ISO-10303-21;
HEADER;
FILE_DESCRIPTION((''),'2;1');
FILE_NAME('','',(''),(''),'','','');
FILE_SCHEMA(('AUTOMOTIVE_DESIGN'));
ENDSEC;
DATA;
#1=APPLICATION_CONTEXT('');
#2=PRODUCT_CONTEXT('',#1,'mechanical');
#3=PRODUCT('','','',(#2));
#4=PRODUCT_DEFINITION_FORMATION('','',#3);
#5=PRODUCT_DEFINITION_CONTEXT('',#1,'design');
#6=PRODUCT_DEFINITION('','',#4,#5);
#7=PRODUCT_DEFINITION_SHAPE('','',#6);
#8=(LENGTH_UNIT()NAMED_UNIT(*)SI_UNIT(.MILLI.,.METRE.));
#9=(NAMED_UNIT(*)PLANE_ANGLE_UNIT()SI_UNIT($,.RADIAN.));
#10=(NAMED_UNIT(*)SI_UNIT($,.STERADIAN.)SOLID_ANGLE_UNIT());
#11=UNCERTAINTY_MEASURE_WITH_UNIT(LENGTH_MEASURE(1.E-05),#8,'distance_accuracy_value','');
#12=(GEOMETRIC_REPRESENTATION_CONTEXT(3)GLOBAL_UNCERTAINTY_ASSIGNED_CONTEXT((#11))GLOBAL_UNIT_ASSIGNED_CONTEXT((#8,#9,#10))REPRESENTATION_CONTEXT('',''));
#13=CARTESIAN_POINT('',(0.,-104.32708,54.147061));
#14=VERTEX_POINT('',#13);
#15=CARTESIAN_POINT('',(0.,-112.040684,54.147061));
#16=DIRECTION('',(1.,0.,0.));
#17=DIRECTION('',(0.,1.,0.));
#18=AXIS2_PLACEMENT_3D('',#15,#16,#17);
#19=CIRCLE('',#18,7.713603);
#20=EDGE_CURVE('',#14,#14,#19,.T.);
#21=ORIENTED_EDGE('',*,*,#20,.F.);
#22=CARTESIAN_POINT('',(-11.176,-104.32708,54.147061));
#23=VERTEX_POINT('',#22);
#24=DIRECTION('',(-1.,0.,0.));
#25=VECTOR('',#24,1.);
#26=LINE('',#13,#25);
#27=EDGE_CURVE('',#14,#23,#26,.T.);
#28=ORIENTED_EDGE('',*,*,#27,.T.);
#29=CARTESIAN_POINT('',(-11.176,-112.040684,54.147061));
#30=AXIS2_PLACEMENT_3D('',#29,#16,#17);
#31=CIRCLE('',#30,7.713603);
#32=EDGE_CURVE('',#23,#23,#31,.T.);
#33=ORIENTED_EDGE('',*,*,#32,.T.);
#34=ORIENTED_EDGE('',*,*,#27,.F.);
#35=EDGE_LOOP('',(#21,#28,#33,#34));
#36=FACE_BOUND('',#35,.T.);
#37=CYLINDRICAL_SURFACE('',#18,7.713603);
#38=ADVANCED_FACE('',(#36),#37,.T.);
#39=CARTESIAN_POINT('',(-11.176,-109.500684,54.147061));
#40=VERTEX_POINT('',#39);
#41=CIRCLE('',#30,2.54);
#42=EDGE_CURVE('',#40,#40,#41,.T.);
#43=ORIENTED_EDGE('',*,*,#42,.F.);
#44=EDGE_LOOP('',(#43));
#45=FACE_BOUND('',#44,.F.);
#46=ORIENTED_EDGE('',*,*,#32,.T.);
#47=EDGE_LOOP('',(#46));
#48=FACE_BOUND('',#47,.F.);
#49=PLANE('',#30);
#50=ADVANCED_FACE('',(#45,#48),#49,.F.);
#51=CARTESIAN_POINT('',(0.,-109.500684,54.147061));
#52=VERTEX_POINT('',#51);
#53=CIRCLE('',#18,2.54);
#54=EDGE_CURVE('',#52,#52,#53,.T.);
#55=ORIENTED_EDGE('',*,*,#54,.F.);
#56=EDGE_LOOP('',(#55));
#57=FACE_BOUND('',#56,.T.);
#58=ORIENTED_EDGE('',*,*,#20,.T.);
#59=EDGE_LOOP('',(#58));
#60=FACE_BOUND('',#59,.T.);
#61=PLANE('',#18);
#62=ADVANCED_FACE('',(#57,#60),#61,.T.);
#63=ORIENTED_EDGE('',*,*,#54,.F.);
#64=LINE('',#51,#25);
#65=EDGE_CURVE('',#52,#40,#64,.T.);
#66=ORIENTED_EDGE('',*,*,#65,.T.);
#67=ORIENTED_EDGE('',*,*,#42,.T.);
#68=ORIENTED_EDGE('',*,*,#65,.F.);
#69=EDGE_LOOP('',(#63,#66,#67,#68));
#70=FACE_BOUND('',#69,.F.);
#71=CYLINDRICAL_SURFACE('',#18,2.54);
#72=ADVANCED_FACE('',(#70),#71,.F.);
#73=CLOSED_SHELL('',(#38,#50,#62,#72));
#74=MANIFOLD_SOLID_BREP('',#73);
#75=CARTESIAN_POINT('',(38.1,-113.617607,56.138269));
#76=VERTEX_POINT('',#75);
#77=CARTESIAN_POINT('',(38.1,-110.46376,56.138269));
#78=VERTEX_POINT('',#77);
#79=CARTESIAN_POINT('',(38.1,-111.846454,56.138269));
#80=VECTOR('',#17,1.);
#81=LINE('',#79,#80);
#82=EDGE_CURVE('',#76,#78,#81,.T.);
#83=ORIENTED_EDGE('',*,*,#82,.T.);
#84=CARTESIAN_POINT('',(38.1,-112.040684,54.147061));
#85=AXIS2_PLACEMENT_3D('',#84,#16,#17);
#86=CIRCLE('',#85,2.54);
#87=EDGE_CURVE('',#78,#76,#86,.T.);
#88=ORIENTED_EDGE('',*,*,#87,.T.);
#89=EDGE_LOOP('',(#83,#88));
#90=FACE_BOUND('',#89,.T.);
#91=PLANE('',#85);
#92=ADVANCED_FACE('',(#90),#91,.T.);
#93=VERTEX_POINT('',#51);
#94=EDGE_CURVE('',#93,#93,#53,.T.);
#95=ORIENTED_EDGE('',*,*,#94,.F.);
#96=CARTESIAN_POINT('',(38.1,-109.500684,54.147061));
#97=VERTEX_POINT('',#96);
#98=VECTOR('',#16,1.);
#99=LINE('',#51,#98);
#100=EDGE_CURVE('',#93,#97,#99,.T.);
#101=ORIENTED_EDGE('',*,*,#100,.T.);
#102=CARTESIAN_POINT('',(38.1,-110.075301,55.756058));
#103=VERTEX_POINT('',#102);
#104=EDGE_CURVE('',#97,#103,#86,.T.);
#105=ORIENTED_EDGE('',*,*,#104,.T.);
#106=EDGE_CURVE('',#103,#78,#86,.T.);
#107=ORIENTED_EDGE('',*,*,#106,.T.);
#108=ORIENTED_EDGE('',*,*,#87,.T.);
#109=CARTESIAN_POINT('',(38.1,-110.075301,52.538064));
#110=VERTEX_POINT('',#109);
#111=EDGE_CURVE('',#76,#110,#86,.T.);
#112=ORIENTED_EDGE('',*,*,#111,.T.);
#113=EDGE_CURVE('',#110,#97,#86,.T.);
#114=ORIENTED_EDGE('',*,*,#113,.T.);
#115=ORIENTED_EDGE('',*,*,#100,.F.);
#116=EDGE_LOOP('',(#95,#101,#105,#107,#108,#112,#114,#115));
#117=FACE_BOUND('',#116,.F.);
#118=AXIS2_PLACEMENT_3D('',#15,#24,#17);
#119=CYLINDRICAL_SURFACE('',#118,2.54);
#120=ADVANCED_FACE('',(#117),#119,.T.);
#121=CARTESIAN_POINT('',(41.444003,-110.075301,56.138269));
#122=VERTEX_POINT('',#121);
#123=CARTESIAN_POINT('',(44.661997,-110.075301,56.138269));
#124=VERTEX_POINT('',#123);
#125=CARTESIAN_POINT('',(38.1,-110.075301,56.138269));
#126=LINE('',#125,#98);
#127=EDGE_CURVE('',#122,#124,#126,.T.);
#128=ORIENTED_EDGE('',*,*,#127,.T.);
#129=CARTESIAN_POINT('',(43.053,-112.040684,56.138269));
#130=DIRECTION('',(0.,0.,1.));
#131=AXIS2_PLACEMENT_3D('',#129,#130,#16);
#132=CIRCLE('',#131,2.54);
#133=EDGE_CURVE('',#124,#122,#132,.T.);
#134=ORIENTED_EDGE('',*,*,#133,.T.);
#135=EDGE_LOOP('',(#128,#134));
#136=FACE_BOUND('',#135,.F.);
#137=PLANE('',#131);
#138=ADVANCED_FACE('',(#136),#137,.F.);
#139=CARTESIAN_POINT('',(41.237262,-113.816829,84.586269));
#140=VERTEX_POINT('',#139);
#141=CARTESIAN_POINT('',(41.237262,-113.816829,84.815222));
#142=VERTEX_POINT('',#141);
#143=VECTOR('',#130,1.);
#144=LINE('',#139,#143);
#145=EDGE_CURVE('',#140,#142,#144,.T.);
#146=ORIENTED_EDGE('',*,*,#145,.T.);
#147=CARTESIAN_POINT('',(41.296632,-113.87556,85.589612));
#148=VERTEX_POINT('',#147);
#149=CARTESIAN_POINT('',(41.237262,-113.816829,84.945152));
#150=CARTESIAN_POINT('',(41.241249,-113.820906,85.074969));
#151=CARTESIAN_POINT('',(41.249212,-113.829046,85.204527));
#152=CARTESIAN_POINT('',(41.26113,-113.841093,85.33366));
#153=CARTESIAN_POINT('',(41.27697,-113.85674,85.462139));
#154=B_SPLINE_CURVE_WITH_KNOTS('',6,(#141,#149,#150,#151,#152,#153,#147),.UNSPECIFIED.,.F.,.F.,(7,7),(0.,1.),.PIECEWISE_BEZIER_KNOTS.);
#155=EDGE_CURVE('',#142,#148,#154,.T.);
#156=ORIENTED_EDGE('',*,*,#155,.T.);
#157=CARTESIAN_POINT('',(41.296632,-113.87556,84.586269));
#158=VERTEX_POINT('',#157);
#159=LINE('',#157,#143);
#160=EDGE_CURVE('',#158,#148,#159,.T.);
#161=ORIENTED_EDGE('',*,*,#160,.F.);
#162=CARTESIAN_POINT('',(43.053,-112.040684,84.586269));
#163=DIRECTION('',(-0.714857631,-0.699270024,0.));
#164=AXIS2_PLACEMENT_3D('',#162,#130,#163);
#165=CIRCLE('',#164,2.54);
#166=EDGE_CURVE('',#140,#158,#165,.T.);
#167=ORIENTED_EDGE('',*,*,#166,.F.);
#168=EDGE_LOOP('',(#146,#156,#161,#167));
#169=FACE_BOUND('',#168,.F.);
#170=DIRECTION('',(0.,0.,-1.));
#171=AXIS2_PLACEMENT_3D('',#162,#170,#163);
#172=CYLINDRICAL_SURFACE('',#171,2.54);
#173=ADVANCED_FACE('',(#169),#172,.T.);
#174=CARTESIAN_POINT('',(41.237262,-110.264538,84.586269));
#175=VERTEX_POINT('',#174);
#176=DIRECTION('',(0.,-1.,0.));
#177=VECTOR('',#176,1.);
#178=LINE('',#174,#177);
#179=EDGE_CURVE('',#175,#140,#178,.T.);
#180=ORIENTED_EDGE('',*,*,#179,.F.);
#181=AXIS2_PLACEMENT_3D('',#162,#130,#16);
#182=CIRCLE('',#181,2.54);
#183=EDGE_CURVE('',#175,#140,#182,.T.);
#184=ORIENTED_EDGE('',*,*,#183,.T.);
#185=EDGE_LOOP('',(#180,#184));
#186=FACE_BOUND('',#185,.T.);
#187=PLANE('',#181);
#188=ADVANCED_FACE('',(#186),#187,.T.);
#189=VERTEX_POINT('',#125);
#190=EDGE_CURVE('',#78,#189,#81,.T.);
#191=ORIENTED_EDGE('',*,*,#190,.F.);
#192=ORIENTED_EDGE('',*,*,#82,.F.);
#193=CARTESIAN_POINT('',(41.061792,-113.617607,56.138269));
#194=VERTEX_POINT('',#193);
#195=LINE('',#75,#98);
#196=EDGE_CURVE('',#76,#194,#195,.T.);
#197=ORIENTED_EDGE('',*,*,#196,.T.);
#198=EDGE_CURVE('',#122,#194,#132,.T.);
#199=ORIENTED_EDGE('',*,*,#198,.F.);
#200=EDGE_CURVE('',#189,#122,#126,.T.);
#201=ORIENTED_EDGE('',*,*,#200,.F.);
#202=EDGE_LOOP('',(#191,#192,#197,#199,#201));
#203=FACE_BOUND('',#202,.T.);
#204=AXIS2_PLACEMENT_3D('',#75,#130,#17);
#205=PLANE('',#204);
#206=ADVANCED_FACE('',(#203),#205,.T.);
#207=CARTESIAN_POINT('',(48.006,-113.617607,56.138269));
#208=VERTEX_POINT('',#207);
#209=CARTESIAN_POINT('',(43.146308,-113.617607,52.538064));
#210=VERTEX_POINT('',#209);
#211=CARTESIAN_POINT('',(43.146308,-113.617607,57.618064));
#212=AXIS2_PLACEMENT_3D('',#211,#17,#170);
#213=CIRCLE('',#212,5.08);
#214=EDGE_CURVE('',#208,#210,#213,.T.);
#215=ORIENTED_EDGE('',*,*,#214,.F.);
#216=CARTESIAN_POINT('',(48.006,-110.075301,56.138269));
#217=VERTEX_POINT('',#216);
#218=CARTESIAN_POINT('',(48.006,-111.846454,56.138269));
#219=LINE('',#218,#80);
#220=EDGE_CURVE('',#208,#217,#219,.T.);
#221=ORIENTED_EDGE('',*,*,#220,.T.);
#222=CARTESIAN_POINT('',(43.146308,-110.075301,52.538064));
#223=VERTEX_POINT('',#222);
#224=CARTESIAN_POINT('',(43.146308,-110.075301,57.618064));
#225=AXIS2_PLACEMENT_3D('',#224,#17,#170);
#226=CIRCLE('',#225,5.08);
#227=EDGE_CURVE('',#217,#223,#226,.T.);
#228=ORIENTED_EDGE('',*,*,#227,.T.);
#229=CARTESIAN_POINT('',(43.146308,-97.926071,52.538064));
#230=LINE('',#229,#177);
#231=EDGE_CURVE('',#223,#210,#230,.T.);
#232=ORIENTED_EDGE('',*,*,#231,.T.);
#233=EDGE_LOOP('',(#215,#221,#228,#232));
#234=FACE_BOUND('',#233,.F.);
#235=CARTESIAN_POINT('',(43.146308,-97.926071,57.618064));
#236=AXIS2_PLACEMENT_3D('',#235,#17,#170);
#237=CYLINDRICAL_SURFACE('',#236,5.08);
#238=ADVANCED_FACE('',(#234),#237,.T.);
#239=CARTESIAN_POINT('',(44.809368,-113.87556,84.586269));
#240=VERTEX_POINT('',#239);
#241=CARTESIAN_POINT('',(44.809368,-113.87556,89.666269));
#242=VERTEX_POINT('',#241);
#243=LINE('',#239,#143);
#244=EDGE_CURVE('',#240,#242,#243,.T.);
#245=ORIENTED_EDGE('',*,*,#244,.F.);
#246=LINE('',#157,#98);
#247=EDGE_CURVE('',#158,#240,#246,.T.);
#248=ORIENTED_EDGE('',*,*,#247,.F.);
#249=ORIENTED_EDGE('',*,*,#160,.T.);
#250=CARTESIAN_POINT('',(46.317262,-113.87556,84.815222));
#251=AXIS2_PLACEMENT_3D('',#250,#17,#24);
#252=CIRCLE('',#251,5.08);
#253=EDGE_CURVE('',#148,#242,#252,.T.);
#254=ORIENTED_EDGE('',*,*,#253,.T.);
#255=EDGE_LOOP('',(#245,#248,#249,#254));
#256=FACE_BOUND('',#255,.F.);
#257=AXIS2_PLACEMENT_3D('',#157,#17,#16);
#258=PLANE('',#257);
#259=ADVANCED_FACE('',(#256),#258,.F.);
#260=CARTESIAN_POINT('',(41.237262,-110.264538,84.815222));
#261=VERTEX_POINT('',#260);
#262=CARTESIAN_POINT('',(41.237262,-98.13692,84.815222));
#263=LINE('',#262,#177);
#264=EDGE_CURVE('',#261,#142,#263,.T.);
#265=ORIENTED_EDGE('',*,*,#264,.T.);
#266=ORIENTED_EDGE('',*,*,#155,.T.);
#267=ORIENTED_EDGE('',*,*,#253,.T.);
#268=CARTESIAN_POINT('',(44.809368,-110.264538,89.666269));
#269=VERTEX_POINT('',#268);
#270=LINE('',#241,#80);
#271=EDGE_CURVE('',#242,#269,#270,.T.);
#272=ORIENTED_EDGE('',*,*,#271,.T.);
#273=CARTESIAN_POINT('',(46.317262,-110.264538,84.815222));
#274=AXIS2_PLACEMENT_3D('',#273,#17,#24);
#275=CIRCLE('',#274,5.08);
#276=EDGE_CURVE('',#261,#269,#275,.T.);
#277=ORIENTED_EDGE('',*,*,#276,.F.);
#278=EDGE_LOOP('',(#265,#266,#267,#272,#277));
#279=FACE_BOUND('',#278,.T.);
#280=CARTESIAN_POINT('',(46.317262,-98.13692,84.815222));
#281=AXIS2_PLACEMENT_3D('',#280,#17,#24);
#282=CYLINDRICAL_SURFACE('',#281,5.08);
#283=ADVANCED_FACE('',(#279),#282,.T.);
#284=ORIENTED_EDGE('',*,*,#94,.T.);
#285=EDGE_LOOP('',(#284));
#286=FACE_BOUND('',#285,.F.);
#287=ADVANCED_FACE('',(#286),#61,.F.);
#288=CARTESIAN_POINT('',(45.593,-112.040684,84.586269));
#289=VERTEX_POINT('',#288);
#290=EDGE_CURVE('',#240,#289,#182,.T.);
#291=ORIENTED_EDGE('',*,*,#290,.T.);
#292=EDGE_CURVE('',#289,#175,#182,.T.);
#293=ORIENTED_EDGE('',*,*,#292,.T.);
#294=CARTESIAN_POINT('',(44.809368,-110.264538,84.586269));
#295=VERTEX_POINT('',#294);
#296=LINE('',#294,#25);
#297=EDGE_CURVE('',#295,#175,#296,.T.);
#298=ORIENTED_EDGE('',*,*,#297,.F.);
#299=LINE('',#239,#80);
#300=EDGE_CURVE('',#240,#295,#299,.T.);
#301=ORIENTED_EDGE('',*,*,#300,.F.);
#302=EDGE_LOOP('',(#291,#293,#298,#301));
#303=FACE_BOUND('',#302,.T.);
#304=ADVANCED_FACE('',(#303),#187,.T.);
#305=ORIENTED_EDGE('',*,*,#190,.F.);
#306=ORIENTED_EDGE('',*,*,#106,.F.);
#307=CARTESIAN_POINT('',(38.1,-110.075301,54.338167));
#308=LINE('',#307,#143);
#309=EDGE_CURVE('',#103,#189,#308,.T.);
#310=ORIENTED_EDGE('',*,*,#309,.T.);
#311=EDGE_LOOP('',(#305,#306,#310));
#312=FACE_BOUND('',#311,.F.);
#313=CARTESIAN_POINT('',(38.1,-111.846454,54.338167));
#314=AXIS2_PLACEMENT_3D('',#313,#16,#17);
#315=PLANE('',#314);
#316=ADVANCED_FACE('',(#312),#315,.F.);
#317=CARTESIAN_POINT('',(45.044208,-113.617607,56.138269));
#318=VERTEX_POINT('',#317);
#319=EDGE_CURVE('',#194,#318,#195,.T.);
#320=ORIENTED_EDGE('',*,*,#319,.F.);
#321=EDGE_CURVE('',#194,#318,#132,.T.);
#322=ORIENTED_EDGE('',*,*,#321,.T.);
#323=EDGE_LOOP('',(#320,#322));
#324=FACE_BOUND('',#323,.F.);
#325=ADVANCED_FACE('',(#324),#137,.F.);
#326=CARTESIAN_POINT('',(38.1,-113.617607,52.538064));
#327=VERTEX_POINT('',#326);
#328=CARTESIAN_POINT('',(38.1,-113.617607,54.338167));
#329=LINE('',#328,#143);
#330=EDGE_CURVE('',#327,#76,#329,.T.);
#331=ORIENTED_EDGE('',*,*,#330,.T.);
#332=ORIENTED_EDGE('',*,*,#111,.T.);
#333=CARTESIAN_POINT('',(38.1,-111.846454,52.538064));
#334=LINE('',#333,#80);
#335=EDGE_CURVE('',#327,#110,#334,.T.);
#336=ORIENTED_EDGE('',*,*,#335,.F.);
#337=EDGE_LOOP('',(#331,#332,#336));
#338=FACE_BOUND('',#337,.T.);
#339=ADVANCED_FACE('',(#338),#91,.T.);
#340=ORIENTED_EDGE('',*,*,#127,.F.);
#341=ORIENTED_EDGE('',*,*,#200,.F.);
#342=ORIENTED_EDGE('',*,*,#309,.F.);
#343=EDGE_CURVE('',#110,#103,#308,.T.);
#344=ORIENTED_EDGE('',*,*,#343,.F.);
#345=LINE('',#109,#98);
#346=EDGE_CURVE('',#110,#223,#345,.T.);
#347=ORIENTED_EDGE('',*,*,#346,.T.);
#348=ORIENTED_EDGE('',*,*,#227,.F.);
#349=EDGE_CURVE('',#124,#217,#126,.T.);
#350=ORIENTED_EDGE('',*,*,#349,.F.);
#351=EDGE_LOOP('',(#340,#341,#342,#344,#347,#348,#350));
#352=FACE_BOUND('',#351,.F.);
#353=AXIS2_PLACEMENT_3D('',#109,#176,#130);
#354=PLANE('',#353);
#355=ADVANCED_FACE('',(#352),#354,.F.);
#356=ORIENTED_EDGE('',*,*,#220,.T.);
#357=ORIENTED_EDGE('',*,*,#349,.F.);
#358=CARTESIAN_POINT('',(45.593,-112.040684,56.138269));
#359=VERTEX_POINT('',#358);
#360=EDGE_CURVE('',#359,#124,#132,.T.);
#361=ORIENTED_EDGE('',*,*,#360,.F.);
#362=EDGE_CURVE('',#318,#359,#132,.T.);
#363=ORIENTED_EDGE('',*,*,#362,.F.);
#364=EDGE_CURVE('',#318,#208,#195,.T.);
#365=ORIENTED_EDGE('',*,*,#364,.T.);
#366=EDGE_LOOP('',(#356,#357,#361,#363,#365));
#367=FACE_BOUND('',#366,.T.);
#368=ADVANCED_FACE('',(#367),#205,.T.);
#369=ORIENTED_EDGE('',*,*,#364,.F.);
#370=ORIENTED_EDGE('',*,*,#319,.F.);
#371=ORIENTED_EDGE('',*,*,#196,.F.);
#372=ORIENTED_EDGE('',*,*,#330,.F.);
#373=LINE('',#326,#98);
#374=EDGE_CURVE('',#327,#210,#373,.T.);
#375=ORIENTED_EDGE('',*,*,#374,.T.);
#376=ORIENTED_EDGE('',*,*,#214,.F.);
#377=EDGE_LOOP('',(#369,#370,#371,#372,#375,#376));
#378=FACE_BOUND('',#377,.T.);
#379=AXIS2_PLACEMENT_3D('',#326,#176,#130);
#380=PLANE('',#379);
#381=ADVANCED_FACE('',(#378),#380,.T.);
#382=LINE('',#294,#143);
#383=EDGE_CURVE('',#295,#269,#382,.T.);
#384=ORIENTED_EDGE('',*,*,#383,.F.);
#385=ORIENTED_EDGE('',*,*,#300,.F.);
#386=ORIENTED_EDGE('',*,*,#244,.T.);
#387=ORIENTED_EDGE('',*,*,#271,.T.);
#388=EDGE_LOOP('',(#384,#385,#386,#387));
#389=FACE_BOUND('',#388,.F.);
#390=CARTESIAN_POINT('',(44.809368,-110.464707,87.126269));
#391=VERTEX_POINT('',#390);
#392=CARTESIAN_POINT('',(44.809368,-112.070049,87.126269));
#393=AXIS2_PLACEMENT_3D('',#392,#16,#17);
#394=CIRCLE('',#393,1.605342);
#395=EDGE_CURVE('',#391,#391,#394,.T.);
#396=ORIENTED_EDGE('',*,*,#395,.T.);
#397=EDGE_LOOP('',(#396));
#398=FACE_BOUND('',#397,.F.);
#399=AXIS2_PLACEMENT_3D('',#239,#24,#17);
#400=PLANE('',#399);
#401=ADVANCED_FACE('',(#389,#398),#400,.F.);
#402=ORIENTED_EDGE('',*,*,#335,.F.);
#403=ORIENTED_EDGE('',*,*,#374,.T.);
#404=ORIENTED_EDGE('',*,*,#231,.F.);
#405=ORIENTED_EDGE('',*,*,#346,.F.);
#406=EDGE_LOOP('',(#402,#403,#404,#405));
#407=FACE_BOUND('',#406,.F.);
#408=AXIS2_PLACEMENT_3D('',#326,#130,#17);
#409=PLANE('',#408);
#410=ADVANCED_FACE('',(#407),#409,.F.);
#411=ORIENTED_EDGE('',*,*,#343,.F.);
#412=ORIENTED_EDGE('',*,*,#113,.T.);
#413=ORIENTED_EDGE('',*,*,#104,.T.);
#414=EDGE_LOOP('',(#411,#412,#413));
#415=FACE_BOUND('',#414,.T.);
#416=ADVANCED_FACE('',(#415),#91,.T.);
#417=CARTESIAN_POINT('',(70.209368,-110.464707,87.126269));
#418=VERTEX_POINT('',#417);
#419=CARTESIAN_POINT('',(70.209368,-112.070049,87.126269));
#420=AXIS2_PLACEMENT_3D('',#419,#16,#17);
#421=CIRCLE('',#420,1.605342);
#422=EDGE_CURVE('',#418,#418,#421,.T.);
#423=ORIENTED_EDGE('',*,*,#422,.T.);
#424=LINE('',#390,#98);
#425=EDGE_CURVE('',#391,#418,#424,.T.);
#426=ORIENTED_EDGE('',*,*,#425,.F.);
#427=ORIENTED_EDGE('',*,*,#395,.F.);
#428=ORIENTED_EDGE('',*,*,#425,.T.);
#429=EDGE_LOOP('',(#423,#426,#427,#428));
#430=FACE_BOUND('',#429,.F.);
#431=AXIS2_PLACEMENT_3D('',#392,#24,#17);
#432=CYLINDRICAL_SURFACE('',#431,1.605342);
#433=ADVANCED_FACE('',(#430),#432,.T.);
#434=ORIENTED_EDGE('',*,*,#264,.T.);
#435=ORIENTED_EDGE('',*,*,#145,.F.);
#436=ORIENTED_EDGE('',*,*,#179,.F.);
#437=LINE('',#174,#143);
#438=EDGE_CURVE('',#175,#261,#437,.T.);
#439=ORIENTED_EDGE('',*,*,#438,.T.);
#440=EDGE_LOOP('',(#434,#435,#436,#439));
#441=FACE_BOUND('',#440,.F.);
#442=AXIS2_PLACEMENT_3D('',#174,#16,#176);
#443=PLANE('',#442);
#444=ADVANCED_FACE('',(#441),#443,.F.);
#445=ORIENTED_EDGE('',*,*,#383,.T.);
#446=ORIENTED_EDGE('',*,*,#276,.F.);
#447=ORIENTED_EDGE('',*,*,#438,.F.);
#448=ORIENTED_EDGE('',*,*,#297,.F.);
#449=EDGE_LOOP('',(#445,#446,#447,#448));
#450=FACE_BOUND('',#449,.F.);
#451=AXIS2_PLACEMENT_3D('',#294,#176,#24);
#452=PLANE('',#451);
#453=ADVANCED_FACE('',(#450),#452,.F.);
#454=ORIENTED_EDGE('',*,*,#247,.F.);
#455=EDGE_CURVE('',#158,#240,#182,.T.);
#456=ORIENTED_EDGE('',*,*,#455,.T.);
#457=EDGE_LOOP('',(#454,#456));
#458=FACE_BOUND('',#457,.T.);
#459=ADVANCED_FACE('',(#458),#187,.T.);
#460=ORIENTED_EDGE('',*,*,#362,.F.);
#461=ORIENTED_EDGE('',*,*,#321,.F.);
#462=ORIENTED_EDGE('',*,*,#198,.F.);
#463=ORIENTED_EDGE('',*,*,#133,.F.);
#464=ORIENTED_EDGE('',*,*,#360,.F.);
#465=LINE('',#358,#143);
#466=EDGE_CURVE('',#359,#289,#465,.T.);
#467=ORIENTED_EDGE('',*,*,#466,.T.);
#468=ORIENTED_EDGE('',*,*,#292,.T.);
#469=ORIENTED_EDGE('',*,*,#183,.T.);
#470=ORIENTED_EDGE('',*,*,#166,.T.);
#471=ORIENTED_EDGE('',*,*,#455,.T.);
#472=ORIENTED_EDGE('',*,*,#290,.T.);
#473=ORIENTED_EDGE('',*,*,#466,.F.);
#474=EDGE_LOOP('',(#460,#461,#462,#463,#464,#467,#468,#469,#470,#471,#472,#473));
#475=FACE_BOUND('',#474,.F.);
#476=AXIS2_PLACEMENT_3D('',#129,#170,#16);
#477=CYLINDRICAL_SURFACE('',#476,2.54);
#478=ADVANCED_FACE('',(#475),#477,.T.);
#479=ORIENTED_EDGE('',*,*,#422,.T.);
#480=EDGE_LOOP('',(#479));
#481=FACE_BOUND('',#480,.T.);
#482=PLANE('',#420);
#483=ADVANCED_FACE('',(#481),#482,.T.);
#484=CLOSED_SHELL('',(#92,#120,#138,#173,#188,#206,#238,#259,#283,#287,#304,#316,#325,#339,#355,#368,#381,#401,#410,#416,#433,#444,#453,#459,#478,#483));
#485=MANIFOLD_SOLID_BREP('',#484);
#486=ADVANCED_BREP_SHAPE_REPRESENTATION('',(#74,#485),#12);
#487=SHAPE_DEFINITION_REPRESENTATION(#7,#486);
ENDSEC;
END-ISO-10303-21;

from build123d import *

# Parameters (mm, degrees)
F0_R         = 2.54
F1_DEPTH     = 38.1
F2_W         = 3.5423064731
F2_H         = 3.6002054004
F3_DEPTH     = 9.906
F4_T1_DEPTH  = 27.8407673004
F5_R         = 2.54
F6_DEPTH     = 28.448
F0_R_2       = 7.7136033571
F7_DEPTH     = 11.176
F9_DEPTH     = 5.08
F10_T1_DEPTH = 27.8075265616
F11_R        = 1.605342172
F12_DEPTH    = 25.4


# Not quite as in the source:
# - a fillet or chamfer that OpenCascade refuses, or shapes differently, is made with other operations: its cross-section is extruded or revolved along the edge and cut away or added


with BuildPart() as f1:
    # F0 (on Right) → F1 (new body)
    with BuildSketch(Plane.YZ):
        with Locations((-112.0406836271, 54.1470609605)):
            Circle(F0_R)
    extrude(amount=F1_DEPTH)

    # F2 (on face) → F3 (join)
    with BuildSketch(Plane.YZ.offset(38.1)):
        with Locations((-111.8464542239, 54.3381667436)):
            Rectangle(F2_W, F2_H)
    extrude(amount=F3_DEPTH)

    # F4: fillet of radius 5.08 on 1 edges, made by hand

    # F4_s2 → F4_t1 (cut)
    with BuildSketch(Plane.XZ.offset(97.9260705737)):
        with BuildLine():
            ThreePointArc((43.1463078345, 52.5380640434), (46.1702988592, 53.5361676357), (48.006, 56.1382694438))
            Line((48.006, 56.1382694438), (48.006, 52.5380640434))
            Line((48.006, 52.5380640434), (43.1463078345, 52.5380640434))
        make_face()
    extrude(amount=F4_T1_DEPTH, mode=Mode.SUBTRACT)

    # F5 (on face) → F6 (join)
    with BuildSketch(Plane.XY.offset(56.1382694438)):
        with Locations((43.053, -112.0406836271)):
            Circle(F5_R)
    extrude(amount=F6_DEPTH)

    # F8 (on face) → F9 (join)
    with BuildSketch(Plane.XY.offset(84.5862694438)):
        with BuildLine():
            Line((44.8093679455, -110.2645377603), (41.2372616213, -110.2645377603))
            Line((41.2372616213, -110.2645377603), (41.2372616213, -113.8168294939))
            ThreePointArc((41.2372616213, -113.8168294939), (41.2667054502, -113.8464388103), (41.2966320545, -113.8755600916))
            Line((41.2966320545, -113.8755600916), (44.8093679455, -113.8755600916))
            Line((44.8093679455, -113.8755600916), (44.8093679455, -110.2645377603))
        make_face()
    extrude(amount=F9_DEPTH)

    # F10: fillet of radius 5.08 on 1 edges, made by hand

    # F10_s2 → F10_t1 (cut)
    with BuildSketch(Plane.XZ.offset(98.1369203463)):
        with BuildLine():
            ThreePointArc((41.2372616213, 84.8152224782), (42.2266320932, 87.8273894828), (44.8093679455, 89.6662694438))
            Line((44.8093679455, 89.6662694438), (41.2372616213, 89.6662694438))
            Line((41.2372616213, 89.6662694438), (41.2372616213, 84.8152224782))
        make_face()
    extrude(amount=F10_T1_DEPTH, mode=Mode.SUBTRACT)

    # F11 (on face) → F12 (join)
    with BuildSketch(Plane.YZ.offset(44.8093679455)):
        with Locations((-112.070048926, 87.1262694438)):
            Circle(F11_R)
    extrude(amount=F12_DEPTH)


with BuildPart() as f7:
    # F0 (on Right) → F7 (new body)
    with BuildSketch(Plane.YZ):
        with Locations((-112.0406836271, 54.1470609605)):
            Circle(F0_R_2)
        with Locations((-112.0406836271, 54.1470609605)):
            Circle(F0_R, mode=Mode.SUBTRACT)
    extrude(amount=-F7_DEPTH)


solid = Compound([f1.part, f7.part])
